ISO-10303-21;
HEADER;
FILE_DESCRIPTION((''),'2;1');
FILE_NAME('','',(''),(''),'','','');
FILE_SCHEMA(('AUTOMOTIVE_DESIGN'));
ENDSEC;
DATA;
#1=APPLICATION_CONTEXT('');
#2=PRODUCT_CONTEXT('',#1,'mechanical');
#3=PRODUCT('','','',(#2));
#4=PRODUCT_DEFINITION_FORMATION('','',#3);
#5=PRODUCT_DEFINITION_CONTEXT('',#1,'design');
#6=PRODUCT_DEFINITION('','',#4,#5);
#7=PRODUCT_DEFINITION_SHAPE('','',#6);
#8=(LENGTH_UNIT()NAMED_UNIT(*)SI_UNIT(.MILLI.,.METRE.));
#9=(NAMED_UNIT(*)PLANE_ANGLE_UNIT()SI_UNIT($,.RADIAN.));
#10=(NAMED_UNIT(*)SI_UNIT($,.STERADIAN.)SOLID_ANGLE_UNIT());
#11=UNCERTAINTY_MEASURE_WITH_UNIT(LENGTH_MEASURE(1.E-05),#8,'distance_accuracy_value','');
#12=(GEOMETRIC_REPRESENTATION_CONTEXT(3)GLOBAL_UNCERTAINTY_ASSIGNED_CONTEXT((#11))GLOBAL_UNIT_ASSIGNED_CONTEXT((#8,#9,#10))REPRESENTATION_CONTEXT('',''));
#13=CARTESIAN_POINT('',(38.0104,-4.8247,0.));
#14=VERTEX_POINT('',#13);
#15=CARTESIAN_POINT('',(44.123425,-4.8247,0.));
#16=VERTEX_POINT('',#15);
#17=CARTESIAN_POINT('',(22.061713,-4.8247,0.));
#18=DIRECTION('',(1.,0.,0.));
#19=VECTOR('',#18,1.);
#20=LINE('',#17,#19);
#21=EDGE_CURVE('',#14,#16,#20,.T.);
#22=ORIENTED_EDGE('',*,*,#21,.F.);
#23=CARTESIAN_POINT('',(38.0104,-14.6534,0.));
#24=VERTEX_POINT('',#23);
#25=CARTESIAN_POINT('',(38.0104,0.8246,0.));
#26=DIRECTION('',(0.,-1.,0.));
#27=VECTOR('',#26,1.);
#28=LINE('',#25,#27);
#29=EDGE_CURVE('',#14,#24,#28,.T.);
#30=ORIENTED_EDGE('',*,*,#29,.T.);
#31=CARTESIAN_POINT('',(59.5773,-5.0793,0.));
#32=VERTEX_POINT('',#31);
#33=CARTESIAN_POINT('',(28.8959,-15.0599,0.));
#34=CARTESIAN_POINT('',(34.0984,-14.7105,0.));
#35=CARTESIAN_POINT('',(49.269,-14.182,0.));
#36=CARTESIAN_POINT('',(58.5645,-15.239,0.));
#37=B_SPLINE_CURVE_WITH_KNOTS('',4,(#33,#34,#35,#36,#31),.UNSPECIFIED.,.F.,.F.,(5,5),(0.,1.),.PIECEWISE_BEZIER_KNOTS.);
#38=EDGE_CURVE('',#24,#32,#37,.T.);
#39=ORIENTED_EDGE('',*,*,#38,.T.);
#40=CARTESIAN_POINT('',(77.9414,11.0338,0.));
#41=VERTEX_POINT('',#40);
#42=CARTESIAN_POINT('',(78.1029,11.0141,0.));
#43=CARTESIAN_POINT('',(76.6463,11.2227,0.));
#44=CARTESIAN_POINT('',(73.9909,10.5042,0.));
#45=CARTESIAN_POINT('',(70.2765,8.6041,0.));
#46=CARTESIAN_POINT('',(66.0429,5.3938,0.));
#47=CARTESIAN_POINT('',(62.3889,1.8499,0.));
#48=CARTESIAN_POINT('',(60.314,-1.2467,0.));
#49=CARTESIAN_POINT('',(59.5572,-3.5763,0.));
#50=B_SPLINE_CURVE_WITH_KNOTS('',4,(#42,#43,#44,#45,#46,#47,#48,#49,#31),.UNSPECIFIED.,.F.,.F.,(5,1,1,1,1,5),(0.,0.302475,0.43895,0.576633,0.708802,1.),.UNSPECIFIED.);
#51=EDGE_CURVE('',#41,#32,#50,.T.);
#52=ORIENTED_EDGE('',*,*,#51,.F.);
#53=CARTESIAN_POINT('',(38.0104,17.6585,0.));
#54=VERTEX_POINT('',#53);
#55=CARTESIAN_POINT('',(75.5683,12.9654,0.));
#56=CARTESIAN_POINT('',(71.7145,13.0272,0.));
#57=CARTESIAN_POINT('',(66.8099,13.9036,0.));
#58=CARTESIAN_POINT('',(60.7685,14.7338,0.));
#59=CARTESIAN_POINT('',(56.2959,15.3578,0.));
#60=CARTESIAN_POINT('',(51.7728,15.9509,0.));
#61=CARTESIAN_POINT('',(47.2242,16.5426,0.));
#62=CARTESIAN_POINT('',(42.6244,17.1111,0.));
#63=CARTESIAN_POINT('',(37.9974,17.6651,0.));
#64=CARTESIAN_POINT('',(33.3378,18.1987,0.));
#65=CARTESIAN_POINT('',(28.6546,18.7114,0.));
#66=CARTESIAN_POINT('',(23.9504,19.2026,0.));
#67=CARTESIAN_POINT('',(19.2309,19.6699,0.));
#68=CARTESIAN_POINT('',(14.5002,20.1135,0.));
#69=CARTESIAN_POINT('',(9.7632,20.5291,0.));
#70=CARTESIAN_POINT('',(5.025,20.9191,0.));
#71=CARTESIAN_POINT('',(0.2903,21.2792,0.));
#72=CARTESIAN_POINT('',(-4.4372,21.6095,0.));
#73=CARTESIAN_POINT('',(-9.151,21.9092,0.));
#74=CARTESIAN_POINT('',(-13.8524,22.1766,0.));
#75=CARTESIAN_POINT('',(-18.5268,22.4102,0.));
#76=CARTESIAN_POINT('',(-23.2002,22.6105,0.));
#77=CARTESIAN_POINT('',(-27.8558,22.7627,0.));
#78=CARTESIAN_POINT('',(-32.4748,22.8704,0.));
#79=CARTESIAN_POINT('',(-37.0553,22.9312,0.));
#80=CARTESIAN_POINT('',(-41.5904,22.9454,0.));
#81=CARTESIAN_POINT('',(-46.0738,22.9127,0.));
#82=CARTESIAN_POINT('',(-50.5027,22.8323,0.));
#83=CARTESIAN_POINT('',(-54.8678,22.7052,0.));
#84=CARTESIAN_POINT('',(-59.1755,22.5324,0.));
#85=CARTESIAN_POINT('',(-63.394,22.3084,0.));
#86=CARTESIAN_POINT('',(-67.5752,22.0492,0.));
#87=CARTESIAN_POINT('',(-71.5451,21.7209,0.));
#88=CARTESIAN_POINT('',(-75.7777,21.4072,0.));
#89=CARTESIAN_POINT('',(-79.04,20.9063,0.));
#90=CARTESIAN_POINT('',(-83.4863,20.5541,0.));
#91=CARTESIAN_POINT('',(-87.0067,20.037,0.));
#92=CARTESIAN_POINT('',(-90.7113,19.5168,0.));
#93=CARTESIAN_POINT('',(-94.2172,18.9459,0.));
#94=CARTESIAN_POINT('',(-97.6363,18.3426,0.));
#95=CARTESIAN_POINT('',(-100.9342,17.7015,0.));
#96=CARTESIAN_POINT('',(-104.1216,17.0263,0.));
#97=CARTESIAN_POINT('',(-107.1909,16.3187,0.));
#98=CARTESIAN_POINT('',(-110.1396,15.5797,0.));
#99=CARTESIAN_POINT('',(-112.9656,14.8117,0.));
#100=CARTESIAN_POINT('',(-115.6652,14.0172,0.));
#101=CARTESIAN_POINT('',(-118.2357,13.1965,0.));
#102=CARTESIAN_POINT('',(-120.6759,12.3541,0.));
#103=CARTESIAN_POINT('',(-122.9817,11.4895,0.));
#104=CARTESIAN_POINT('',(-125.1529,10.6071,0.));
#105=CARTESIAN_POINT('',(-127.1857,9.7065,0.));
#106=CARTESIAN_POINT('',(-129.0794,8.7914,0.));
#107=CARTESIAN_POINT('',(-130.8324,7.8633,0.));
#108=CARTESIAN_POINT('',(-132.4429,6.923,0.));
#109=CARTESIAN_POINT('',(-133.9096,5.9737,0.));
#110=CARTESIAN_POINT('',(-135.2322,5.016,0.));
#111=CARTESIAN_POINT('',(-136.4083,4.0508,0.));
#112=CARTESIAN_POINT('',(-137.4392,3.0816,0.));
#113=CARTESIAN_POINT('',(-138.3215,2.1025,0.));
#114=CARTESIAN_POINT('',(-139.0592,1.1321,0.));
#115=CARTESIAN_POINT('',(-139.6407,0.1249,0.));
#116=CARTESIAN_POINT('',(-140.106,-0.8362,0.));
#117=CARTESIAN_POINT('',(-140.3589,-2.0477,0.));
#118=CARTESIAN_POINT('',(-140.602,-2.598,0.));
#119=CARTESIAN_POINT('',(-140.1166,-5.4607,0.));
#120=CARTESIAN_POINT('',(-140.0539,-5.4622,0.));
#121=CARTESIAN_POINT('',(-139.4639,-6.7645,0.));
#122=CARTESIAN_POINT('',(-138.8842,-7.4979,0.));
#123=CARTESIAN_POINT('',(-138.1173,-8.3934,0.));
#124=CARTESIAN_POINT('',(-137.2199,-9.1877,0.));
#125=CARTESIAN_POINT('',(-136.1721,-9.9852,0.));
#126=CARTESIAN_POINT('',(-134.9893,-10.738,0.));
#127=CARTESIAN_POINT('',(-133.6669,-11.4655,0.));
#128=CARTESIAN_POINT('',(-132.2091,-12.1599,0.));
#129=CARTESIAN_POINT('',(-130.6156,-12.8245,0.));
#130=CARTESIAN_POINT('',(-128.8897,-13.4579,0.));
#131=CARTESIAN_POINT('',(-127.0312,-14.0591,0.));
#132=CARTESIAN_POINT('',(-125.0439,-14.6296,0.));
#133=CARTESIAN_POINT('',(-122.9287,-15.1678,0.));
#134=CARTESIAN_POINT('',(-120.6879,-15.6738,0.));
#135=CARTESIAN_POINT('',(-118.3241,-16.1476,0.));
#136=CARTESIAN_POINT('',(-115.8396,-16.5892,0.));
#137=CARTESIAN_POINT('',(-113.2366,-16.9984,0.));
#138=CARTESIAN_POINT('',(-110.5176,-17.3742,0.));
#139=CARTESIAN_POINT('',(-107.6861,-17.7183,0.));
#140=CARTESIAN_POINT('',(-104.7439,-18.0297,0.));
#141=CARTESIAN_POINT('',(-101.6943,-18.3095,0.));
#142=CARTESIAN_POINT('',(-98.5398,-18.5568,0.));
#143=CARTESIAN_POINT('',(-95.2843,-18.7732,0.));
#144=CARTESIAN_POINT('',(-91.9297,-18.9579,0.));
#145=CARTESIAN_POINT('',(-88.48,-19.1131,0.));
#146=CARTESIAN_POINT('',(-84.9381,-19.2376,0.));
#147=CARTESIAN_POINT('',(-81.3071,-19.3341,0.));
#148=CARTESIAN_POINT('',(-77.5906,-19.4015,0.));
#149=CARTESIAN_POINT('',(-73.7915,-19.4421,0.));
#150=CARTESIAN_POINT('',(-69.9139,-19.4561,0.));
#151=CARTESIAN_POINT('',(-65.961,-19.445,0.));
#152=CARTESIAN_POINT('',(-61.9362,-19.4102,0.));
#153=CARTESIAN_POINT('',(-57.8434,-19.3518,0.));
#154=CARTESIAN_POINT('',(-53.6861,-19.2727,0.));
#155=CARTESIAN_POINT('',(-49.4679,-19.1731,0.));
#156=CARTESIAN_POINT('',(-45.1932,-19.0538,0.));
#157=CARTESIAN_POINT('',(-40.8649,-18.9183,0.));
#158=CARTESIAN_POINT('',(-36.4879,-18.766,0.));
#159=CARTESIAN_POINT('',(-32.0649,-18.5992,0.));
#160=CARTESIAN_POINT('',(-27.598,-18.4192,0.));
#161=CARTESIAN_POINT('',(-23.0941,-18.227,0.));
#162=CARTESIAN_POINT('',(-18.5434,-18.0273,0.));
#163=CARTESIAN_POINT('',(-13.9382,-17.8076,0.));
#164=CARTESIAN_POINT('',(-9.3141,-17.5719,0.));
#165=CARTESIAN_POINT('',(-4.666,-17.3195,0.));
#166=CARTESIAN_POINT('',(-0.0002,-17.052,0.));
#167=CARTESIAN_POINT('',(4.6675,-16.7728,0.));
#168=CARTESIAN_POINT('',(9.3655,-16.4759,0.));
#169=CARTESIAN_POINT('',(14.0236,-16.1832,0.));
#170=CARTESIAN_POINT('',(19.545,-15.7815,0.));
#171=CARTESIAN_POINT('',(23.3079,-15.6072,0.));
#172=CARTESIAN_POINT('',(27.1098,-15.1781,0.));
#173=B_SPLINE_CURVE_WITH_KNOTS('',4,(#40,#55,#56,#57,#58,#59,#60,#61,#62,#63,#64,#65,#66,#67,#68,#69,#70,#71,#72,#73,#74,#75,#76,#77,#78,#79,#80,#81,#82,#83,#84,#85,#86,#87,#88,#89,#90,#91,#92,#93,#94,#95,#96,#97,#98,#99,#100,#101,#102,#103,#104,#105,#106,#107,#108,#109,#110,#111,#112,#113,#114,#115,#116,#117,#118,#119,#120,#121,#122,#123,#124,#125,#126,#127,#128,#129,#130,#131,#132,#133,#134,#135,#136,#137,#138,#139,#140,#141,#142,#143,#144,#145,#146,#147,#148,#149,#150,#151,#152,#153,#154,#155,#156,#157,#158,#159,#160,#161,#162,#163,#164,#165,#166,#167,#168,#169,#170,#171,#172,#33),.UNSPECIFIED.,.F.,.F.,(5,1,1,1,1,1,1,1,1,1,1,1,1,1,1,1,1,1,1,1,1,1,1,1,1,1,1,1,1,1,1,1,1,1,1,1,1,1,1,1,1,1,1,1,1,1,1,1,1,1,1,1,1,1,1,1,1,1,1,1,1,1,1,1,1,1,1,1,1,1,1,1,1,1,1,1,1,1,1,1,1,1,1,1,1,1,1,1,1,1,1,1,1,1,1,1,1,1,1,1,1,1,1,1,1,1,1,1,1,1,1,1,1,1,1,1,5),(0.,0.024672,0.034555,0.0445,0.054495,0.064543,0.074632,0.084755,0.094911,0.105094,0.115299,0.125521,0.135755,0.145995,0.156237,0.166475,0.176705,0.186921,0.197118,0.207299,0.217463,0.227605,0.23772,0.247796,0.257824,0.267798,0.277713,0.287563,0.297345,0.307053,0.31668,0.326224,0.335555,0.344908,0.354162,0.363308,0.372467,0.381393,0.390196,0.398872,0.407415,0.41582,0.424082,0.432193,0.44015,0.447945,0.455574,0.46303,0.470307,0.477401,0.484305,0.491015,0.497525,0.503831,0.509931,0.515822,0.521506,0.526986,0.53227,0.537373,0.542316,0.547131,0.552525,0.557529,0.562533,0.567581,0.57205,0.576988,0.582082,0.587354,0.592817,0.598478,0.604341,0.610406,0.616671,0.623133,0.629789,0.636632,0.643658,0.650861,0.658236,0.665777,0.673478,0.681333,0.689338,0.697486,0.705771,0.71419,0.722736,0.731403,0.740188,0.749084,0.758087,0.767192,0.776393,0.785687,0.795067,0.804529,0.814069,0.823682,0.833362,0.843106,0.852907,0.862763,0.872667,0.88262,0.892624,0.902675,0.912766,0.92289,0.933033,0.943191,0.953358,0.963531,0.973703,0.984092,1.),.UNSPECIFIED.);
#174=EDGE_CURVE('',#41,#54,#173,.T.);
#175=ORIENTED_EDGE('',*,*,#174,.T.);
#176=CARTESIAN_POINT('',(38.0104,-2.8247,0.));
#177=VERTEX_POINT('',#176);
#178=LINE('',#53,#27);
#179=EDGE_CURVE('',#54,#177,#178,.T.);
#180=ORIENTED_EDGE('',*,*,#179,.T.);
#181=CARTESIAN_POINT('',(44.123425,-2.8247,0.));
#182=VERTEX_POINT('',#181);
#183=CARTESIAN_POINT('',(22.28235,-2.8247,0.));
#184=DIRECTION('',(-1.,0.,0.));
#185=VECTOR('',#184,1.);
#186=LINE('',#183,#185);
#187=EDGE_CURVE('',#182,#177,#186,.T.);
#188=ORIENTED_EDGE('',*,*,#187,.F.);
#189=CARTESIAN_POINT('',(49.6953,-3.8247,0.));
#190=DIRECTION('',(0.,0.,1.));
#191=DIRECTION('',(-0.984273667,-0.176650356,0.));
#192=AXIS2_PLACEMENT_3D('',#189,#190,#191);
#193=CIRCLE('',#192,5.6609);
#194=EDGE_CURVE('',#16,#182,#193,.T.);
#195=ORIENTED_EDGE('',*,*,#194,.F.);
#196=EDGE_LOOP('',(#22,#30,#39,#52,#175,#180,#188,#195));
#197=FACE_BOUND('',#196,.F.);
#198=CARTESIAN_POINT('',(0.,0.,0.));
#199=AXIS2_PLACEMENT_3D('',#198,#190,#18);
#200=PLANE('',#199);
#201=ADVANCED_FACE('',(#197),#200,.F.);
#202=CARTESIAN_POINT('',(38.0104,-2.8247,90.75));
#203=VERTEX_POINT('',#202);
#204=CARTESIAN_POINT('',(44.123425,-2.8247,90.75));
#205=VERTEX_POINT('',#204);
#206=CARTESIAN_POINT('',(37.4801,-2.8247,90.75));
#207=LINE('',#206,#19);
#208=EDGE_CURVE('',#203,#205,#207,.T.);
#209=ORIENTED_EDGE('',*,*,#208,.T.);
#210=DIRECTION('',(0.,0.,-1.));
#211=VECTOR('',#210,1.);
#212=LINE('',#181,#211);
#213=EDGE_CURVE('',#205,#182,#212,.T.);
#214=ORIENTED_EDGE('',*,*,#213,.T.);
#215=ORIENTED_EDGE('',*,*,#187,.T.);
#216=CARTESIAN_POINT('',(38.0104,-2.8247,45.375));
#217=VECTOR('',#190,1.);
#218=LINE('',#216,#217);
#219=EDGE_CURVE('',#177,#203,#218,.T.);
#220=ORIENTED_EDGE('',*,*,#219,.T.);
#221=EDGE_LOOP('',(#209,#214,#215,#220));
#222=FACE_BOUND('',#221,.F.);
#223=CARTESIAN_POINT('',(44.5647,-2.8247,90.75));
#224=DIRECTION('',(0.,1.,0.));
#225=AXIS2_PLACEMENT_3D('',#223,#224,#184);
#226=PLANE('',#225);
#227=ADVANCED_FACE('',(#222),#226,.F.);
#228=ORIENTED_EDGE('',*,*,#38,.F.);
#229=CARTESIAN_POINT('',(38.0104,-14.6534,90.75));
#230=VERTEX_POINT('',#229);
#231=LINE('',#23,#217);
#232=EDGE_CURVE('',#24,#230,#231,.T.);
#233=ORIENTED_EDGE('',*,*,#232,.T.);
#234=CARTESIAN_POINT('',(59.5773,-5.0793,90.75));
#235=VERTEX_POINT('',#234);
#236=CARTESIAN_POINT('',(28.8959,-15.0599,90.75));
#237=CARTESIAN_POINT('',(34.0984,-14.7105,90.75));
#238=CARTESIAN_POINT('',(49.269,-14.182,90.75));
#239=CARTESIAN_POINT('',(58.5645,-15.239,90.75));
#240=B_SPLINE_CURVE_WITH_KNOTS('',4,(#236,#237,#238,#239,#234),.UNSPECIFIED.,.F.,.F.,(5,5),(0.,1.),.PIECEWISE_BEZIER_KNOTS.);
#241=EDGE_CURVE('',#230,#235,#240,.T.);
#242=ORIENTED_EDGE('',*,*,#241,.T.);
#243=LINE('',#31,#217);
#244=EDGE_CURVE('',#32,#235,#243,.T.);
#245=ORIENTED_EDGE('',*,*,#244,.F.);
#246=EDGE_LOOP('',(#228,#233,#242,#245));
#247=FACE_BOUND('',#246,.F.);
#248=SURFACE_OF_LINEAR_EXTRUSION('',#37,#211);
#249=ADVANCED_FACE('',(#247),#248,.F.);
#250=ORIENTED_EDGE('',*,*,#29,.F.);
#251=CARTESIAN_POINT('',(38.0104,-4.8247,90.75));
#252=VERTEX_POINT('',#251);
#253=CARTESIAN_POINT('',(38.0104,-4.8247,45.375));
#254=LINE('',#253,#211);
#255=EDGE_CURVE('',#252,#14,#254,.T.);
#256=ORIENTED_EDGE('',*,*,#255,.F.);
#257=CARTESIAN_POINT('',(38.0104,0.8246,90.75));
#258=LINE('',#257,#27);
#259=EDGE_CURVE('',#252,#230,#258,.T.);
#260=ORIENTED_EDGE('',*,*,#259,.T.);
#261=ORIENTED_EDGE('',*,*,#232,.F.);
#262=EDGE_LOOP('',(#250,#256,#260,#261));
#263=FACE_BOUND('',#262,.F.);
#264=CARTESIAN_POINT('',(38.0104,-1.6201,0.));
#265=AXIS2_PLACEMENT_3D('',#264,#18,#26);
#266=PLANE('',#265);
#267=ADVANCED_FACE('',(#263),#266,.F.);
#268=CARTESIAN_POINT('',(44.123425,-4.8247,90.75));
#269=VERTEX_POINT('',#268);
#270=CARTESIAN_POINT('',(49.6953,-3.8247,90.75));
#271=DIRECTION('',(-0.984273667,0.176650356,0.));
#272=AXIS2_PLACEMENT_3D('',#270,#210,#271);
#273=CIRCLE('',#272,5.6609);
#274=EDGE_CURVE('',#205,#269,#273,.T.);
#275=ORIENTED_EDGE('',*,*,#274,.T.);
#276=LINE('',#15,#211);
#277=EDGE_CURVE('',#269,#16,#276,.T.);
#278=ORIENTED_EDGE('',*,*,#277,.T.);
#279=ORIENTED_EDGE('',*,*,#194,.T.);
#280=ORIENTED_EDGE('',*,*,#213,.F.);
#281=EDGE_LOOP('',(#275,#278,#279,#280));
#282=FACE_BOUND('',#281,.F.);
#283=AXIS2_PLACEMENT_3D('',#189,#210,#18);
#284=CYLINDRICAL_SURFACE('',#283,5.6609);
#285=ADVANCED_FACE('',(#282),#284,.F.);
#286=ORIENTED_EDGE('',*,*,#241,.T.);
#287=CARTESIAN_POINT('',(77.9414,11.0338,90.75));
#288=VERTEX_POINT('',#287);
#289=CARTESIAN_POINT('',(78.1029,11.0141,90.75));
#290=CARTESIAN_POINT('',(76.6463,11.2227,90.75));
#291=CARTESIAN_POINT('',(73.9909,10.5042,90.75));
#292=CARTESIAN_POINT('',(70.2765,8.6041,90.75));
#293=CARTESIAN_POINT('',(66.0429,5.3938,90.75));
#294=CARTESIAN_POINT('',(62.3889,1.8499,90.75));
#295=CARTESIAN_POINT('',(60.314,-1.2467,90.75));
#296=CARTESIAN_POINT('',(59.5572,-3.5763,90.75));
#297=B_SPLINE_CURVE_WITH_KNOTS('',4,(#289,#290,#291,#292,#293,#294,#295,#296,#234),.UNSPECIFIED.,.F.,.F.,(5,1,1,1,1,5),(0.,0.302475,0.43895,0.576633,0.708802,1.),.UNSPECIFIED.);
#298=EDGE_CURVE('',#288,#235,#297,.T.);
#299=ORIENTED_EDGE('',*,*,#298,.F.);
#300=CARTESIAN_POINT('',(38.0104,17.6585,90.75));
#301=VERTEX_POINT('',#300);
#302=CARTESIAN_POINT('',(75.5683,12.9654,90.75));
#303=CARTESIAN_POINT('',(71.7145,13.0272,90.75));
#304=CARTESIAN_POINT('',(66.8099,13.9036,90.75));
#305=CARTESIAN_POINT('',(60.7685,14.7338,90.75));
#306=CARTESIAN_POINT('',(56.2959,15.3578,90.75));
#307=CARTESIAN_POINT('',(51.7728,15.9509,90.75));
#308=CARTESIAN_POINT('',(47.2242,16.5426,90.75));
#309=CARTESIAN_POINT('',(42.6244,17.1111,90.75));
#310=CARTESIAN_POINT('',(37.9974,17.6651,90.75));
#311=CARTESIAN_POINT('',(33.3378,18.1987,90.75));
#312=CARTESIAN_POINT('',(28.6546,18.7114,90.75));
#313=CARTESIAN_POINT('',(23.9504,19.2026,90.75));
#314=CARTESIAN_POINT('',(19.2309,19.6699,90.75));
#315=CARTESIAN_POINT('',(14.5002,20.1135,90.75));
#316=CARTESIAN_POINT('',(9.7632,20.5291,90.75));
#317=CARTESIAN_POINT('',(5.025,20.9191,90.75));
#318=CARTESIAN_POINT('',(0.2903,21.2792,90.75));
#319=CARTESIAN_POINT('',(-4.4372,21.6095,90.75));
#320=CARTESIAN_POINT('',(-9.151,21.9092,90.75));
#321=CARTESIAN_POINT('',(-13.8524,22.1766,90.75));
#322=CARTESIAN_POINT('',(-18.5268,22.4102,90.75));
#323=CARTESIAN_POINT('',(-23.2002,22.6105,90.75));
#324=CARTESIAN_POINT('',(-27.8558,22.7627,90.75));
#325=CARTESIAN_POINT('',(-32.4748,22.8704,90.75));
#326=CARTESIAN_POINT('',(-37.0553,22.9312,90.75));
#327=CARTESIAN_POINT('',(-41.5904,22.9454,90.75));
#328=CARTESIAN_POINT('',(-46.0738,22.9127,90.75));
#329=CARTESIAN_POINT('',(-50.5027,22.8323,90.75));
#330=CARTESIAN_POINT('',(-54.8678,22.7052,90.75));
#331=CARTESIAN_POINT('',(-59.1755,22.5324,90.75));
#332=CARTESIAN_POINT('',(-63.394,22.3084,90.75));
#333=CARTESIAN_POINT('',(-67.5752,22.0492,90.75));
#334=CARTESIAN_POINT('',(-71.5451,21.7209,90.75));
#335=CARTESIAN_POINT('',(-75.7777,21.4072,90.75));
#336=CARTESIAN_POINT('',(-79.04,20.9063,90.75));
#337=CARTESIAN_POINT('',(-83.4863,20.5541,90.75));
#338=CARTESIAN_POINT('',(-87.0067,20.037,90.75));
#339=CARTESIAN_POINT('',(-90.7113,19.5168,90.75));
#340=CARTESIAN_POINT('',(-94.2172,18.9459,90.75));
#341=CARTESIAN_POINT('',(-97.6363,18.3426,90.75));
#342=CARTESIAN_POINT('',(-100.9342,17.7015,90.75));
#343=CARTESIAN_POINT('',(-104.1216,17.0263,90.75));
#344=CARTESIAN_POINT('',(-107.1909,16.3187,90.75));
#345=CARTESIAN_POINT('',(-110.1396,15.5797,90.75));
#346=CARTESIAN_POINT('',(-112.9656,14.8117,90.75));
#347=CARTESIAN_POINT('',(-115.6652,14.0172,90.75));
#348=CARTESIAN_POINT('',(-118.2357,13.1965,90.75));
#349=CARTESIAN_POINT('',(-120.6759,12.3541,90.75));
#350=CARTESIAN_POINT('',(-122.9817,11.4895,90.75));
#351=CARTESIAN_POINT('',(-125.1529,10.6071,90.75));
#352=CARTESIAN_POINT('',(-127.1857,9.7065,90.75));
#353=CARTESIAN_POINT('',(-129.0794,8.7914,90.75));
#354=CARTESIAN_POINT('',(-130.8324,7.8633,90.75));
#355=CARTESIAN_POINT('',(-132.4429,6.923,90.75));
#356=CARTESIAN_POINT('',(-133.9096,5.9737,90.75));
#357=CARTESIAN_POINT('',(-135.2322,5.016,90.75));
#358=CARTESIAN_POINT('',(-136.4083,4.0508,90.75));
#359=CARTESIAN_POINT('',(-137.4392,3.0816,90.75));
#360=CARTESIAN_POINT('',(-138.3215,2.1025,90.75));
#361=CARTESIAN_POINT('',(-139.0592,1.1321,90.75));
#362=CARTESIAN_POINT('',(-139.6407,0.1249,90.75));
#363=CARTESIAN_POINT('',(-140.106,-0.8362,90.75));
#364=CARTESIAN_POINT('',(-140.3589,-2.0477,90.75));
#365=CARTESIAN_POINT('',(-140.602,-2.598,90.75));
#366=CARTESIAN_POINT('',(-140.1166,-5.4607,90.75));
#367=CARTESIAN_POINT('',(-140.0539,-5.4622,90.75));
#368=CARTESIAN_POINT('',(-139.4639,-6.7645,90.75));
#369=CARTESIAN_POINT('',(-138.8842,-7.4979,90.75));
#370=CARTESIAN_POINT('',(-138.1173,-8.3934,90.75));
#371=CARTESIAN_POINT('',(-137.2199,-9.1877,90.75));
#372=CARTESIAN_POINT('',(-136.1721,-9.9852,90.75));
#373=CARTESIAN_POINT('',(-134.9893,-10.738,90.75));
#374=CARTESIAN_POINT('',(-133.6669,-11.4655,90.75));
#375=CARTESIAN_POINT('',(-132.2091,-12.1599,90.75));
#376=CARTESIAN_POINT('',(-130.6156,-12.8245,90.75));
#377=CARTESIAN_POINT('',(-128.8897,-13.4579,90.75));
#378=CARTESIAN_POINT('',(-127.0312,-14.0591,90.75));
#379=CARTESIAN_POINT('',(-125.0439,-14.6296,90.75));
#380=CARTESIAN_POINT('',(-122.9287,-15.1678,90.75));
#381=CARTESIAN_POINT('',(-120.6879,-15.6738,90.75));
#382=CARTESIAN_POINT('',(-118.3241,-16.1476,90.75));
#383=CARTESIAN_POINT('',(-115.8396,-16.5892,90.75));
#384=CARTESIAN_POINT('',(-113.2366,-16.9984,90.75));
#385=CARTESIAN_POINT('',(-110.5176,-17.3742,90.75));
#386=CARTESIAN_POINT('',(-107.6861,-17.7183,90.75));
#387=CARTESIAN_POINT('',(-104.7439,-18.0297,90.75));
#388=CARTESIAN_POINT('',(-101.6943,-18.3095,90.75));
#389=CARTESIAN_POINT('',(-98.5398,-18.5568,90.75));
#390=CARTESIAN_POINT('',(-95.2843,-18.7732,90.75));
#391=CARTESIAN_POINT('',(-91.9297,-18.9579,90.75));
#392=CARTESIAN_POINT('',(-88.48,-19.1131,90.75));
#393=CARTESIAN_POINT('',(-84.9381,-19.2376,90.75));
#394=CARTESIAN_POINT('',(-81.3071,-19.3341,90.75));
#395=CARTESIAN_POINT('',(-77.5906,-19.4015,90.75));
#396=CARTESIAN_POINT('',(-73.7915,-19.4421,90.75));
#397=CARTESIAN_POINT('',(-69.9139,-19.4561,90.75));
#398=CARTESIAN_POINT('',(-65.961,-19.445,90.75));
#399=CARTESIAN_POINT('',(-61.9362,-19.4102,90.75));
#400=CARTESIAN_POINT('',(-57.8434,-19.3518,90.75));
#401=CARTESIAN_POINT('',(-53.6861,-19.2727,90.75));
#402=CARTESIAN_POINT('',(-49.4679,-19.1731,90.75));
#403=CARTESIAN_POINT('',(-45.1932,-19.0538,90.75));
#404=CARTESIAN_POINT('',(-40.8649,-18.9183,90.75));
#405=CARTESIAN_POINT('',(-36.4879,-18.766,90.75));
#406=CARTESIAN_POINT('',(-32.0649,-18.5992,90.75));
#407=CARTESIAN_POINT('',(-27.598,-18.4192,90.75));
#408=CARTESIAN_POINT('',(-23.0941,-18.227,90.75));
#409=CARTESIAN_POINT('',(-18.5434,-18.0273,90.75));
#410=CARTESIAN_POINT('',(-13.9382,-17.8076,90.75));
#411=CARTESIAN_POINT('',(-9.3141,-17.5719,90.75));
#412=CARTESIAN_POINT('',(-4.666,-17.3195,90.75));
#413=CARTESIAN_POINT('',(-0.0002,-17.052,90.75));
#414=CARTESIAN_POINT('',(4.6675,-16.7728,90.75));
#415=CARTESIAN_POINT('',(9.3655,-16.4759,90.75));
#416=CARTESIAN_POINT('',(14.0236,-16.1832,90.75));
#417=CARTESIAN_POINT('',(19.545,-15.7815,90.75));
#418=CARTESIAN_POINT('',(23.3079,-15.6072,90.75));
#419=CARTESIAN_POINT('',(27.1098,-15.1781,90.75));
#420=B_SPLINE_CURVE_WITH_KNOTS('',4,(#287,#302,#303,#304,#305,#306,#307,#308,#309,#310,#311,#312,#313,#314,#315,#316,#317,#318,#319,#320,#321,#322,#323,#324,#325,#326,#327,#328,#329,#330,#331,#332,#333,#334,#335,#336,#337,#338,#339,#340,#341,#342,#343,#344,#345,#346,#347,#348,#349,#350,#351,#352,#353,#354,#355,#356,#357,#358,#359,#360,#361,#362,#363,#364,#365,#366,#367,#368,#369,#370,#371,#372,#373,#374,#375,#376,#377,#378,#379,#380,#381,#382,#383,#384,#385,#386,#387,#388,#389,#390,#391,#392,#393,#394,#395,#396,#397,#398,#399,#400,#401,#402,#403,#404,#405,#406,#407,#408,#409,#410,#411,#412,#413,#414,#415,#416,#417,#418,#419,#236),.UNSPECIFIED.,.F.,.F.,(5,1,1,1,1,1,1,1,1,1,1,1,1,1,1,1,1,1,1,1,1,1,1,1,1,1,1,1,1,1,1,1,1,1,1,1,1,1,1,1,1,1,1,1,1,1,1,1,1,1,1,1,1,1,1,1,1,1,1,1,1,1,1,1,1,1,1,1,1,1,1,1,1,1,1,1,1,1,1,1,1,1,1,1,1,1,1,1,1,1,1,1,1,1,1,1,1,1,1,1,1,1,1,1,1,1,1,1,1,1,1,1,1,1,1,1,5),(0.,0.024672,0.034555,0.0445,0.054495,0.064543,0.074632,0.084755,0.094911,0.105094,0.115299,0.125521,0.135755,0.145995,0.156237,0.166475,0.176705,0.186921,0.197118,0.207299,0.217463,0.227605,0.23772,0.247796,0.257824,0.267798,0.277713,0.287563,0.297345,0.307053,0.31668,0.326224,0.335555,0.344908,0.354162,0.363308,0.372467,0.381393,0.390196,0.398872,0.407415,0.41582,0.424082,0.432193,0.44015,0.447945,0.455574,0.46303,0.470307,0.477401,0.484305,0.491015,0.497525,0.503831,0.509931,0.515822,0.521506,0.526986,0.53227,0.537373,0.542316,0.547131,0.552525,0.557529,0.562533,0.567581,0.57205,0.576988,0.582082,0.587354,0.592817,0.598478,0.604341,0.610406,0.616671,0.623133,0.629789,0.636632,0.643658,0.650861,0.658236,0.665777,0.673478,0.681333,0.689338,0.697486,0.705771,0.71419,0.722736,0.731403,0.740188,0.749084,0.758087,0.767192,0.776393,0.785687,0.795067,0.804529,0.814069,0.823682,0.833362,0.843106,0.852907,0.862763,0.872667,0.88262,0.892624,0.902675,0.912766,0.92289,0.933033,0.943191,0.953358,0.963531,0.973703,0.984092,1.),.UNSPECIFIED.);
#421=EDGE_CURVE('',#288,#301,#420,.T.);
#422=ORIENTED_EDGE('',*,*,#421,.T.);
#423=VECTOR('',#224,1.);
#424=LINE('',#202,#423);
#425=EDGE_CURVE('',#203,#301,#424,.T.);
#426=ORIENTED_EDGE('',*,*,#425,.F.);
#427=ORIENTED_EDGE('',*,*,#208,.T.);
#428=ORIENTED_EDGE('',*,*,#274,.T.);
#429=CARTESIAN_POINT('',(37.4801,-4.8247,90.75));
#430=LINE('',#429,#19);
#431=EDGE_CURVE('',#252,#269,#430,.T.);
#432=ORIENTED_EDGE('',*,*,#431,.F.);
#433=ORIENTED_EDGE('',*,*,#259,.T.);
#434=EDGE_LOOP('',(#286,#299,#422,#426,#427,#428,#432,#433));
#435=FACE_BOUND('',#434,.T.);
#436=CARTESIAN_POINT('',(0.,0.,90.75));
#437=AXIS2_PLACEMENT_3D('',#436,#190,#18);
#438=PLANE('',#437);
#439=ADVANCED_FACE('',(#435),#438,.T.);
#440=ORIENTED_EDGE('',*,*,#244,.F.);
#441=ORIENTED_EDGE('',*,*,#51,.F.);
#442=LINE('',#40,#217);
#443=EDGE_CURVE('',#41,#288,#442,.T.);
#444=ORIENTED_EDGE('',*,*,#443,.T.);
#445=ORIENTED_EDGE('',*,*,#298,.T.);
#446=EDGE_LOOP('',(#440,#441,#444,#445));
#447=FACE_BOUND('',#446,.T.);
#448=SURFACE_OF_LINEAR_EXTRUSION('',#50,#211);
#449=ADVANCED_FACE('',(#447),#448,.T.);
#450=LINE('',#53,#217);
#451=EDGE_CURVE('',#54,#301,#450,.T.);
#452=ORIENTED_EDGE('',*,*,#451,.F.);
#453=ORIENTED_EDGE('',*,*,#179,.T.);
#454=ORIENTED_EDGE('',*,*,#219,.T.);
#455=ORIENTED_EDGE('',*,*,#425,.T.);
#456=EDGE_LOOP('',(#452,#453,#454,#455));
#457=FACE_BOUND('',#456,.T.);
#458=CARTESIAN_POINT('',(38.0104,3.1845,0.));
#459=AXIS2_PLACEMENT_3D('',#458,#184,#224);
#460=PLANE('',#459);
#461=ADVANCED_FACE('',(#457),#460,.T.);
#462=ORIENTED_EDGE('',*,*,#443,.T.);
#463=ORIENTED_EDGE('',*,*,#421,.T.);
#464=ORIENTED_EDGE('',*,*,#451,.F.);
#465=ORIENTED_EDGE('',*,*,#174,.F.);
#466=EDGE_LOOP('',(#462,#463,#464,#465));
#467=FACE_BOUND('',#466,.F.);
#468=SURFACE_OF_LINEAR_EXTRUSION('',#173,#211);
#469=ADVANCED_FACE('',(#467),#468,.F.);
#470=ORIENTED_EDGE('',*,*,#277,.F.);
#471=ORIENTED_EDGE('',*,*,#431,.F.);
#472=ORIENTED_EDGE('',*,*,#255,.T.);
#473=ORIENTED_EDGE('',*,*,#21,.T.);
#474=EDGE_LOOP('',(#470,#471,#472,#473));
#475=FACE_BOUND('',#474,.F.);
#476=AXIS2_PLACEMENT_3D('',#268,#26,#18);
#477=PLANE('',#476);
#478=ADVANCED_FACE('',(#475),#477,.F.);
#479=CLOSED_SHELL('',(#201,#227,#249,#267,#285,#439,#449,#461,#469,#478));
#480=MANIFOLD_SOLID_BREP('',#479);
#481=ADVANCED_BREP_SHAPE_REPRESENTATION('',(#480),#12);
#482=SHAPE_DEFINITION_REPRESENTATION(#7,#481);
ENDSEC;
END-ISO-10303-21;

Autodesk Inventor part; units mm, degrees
ref_plane "YZ Plane" through (0, 0, 0) normal (1, 0, 0) x (0, 1, 0)
ref_plane "XZ Plane" through (0, 0, 0) normal (0, 1, 0) x (-1, 0, 0)
ref_plane "XY Plane" through (0, 0, 0) normal (0, 0, 1) x (1, 0, 0)
sketch "Sketch3" plane through (0, 0, 0) normal (0, 0, 1) x (1, 0, 0)
  line L0 (-80.5781, 0.8246) -> (-80.5781, 20.7988) construction
  circle A0 centre (-80.5781, 0.8246) radius 13.481
  line L1 (-53.7179, 12.5571) -> (-53.7179, -10.9927)
  arc A1 (-53.7179, -10.9927) -> (-51.5054, -12.9814) centre (-51.7179, -10.9927) ccw
  arc A2 (-51.5054, 14.5458) -> (-53.7179, 12.5571) centre (-51.7179, 12.5571) ccw
  line L2 (36.2229, -3.6088) -> (-51.5054, -12.9814)
  line L3 (38.0104, 3.1845) -> (38.0104, -1.6201)
  line L4 (-80.5781, 0.8246) -> (49.5525, 0.8246) construction
  circle A3 centre (49.6953, -3.8247) radius 5.6609
  line L5 (59.6953, 14.884) -> (59.6953, -12.7998) construction
  spline S0 degree 4 poles (77.9414, 11.0338) (75.5683, 12.9654) (71.7145, 13.0272) (66.8099, 13.9036) (60.7685, 14.7338) (56.2959, 15.3578) (51.7728, 15.9509) (47.2242, 16.5426) (42.6244, 17.1111) (37.9974, 17.6651) (33.3378, 18.1987) (28.6546, 18.7114) (23.9504, 19.2026) (19.2309, 19.6699) (14.5002, 20.1135) (9.7632, 20.5291) (5.025, 20.9191) (0.2903, 21.2792) (-4.4372, 21.6095) (-9.151, 21.9092) (-13.8524, 22.1766) (-18.5268, 22.4102) (-23.2002, 22.6105) (-27.8558, 22.7627) (-32.4748, 22.8704) (-37.0553, 22.9312) (-41.5904, 22.9454) (-46.0738, 22.9127) (-50.5027, 22.8323) (-54.8678, 22.7052) (-59.1755, 22.5324) (-63.394, 22.3084) (-67.5752, 22.0492) (-71.5451, 21.7209) (-75.7777, 21.4072) (-79.04, 20.9063) (-83.4863, 20.5541) (-87.0067, 20.037) (-90.7113, 19.5168) (-94.2172, 18.9459) (-97.6363, 18.3426) (-100.9342, 17.7015) (-104.1216, 17.0263) (-107.1909, 16.3187) (-110.1396, 15.5797) (-112.9656, 14.8117) (-115.6652, 14.0172) (-118.2357, 13.1965) (-120.6759, 12.3541) (-122.9817, 11.4895) (-125.1529, 10.6071) (-127.1857, 9.7065) (-129.0794, 8.7914) (-130.8324, 7.8633) (-132.4429, 6.923) (-133.9096, 5.9737) (-135.2322, 5.016) (-136.4083, 4.0508) (-137.4392, 3.0816) (-138.3215, 2.1025) (-139.0592, 1.1321) (-139.6407, 0.1249) (-140.106, -0.8362) (-140.3589, -2.0477) (-140.602, -2.598) (-140.1166, -5.4607) (-140.0539, -5.4622) (-139.4639, -6.7645) (-138.8842, -7.4979) (-138.1173, -8.3934) (-137.2199, -9.1877) (-136.1721, -9.9852) (-134.9893, -10.738) (-133.6669, -11.4655) (-132.2091, -12.1599) (-130.6156, -12.8245) (-128.8897, -13.4579) (-127.0312, -14.0591) (-125.0439, -14.6296) (-122.9287, -15.1678) (-120.6879, -15.6738) (-118.3241, -16.1476) (-115.8396, -16.5892) (-113.2366, -16.9984) (-110.5176, -17.3742) (-107.6861, -17.7183) (-104.7439, -18.0297) (-101.6943, -18.3095) (-98.5398, -18.5568) (-95.2843, -18.7732) (-91.9297, -18.9579) (-88.48, -19.1131) (-84.9381, -19.2376) (-81.3071, -19.3341) (-77.5906, -19.4015) (-73.7915, -19.4421) (-69.9139, -19.4561) (-65.961, -19.445) (-61.9362, -19.4102) (-57.8434, -19.3518) (-53.6861, -19.2727) (-49.4679, -19.1731) (-45.1932, -19.0538) (-40.8649, -18.9183) (-36.4879, -18.766) (-32.0649, -18.5992) (-27.598, -18.4192) (-23.0941, -18.227) (-18.5434, -18.0273) (-13.9382, -17.8076) (-9.3141, -17.5719) (-4.666, -17.3195) (-0.0002, -17.052) (4.6675, -16.7728) (9.3655, -16.4759) (14.0236, -16.1832) (19.545, -15.7815) (23.3079, -15.6072) (27.1098, -15.1781) (28.8959, -15.0599) knots 0 0 0 0 0 0.024672 0.034555 0.0445 0.054495 0.064543 0.074632 0.084755 0.094911 0.105094 0.115299 0.125521 0.135755 0.145995 0.156237 0.166475 0.176705 0.186921 0.197118 0.207299 0.217463 0.227605 0.23772 0.247796 0.257824 0.267798 0.277713 0.287563 0.297345 0.307053 0.31668 0.326224 0.335555 0.344908 0.354162 0.363308 0.372467 0.381393 0.390196 0.398872 0.407415 0.41582 0.424082 0.432193 0.44015 0.447945 0.455574 0.46303 0.470307 0.477401 0.484305 0.491015 0.497525 0.503831 0.509931 0.515822 0.521506 0.526986 0.53227 0.537373 0.542316 0.547131 0.552525 0.557529 0.562533 0.567581 0.57205 0.576988 0.582082 0.587354 0.592817 0.598478 0.604341 0.610406 0.616671 0.623133 0.629789 0.636632 0.643658 0.650861 0.658236 0.665777 0.673478 0.681333 0.689338 0.697486 0.705771 0.71419 0.722736 0.731403 0.740188 0.749084 0.758087 0.767192 0.776393 0.785687 0.795067 0.804529 0.814069 0.823682 0.833362 0.843106 0.852907 0.862763 0.872667 0.88262 0.892624 0.902675 0.912766 0.92289 0.933033 0.943191 0.953358 0.963531 0.973703 0.984092 1 1 1 1 1
  line L6 (7.5013, -16.4763) -> (50.2906, -13.6435) construction
  arc A4 (44.8353, -17.2546) -> (13.385, -19.3367) centre (31.5327, -54.8885) ccw construction
  line L7 (159.6953, -3.8066) -> (59.6953, -3.8066) construction
  line L8 (-51.5054, 14.5458) -> (36.2229, 5.1732)
  arc A5 (36.2229, -3.6088) -> (38.0104, -1.6201) centre (36.0104, -1.6201) ccw
  arc A6 (38.0104, 3.1845) -> (36.2229, 5.1732) centre (36.0104, 3.1845) ccw
  spline S1 degree 4 poles (78.1029, 11.0141) (76.6463, 11.2227) (73.9909, 10.5042) (70.2765, 8.6041) (66.0429, 5.3938) (62.3889, 1.8499) (60.314, -1.2467) (59.5572, -3.5763) (59.5773, -5.0793) knots 0 0 0 0 0 0.302475 0.43895 0.576633 0.708802 1 1 1 1 1
  spline S2 degree 4 poles (28.8959, -15.0599) (34.0984, -14.7105) (49.269, -14.182) (58.5645, -15.239) (59.5773, -5.0793) knots 0 0 0 0 0 1 1 1 1 1
  line L9 (28.8959, -15.0599) -> (34.0984, -14.7105) construction
  line L10 (34.0984, -14.7105) -> (49.269, -14.182) construction
  line L11 (49.269, -14.182) -> (58.5645, -15.239) construction
  line L12 (58.5645, -15.239) -> (59.5773, -5.0793) construction
  line L13 (-140.4646, -2.8394) -> (159.4818, -3.8173) construction
  line L14 (-132.0856, 0.6333) -> (-132.0856, -6.3667)
  line L15 (-132.0856, -6.3667) -> (-110.3816, -12.3574)
  line L16 (-110.3816, -12.3574) -> (-104.797, -12.3574)
  line L17 (-104.797, -12.3574) -> (-104.797, -18.0156)
  line L18 (-132.0856, 0.6333) -> (-110.3816, 10.553)
  line L19 (-110.3816, 10.553) -> (-104.1736, 10.553)
  line L20 (-104.1736, 10.553) -> (-104.1736, 17.0026)
  line L21 (38.0104, 0.8246) -> (38.0104, -14.6534)
  line L22 (38.0104, 0.8246) -> (38.0104, 17.6585)
  point P0 (0, 0)
  point P1 (17.6589, 23.5628)
  point P2 (75.883, 10.8572)
  point P3 (72.8647, 9.7686)
  point P4 (69.4179, 7.8149)
  point P5 (66.0452, 5.2617)
  point P6 (63.1887, 2.4463)
  point P7 (61.1228, -0.3317)
  point P8 (59.9357, -2.8689)
  point P9 (-160.0931, -3.8671)
  point P10 (28.8959, -15.0599)
  point P11 (69.5533, 13.4647)
  point P12 (65.1899, 14.1023)
  point P13 (60.7936, 14.7318)
  point P14 (56.3207, 15.3468)
  point P15 (51.7945, 15.947)
  point P16 (47.2398, 16.5346)
  point P17 (42.6414, 17.1053)
  point P18 (33.3491, 18.1925)
  point P19 (28.6632, 18.7055)
  point P20 (23.9568, 19.1966)
  point P21 (19.2348, 19.6643)
  point P22 (14.5017, 20.1074)
  point P23 (9.7623, 20.5238)
  point P24 (5.0217, 20.9132)
  point P25 (0.2844, 21.2735)
  point P26 (-4.4451, 21.6038)
  point P27 (-9.1614, 21.9032)
  point P28 (-13.86, 22.1702)
  point P29 (-18.5361, 22.4036)
  point P30 (-23.211, 22.601)
  point P31 (-27.8721, 22.754)
  point P32 (-32.4966, 22.8611)
  point P33 (-37.0797, 22.9217)
  point P34 (-41.6169, 22.9356)
  point P35 (-46.1028, 22.9023)
  point P36 (-50.5329, 22.8216)
  point P37 (-54.9021, 22.6941)
  point P38 (-59.2065, 22.5195)
  point P39 (-63.4406, 22.2977)
  point P40 (-67.6008, 22.0302)
  point P41 (-71.6806, 21.7165)
  point P42 (-75.6814, 21.3591)
  point P43 (-79.1834, 20.9458)
  point P44 (-83.4048, 20.5095)
  point P45 (-87.1309, 20.023)
  point P46 (-90.7527, 19.494)
  point P47 (-94.2725, 18.9266)
  point P48 (-97.6845, 18.3211)
  point P49 (-100.9861, 17.6791)
  point P50 (-107.2438, 16.2934)
  point P51 (-110.1931, 15.553)
  point P52 (-113.0194, 14.7835)
  point P53 (-115.7191, 13.987)
  point P54 (-118.2898, 13.165)
  point P55 (-120.7294, 12.3201)
  point P56 (-123.0349, 11.454)
  point P57 (-125.2048, 10.569)
  point P58 (-127.2364, 9.6666)
  point P59 (-129.1282, 8.7491)
  point P60 (-130.8786, 7.8185)
  point P61 (-132.486, 6.8762)
  point P62 (-133.9488, 5.9245)
  point P63 (-135.2661, 4.9648)
  point P64 (-136.4363, 3.9987)
  point P65 (-137.4592, 3.0275)
  point P66 (-138.3336, 2.0531)
  point P67 (-139.0591, 1.0763)
  point P68 (-139.6352, 0.0983)
  point P69 (-140.0613, -0.8802)
  point P70 (-140.338, -1.8576)
  point P71 (-140.1239, -5.2398)
  point P72 (-139.9547, -5.7022)
  point P73 (-139.492, -6.6066)
  point P74 (-138.8844, -7.4823)
  point P75 (-138.1328, -8.3292)
  point P76 (-137.2384, -9.147)
  point P77 (-136.202, -9.9355)
  point P78 (-135.0249, -10.6943)
  point P79 (-133.7085, -11.4228)
  point P80 (-132.2548, -12.1206)
  point P81 (-130.6648, -12.7879)
  point P82 (-128.941, -13.4239)
  point P83 (-127.0846, -14.0282)
  point P84 (-125.0983, -14.6009)
  point P85 (-122.9839, -15.1415)
  point P86 (-120.7435, -15.6497)
  point P87 (-118.3798, -16.1256)
  point P88 (-115.8952, -16.569)
  point P89 (-113.2918, -16.9797)
  point P90 (-110.5723, -17.3574)
  point P91 (-107.74, -17.7027)
  point P92 (-101.7463, -18.2964)
  point P93 (-98.5909, -18.5451)
  point P94 (-95.3341, -18.7623)
  point P95 (-91.9783, -18.9484)
  point P96 (-88.5271, -19.1041)
  point P97 (-84.9838, -19.2298)
  point P98 (-81.3514, -19.3267)
  point P99 (-77.6332, -19.3951)
  point P100 (-73.8324, -19.4362)
  point P101 (-69.9531, -19.4509)
  point P102 (-65.9985, -19.4404)
  point P103 (-61.9719, -19.4059)
  point P104 (-57.8772, -19.3483)
  point P105 (-53.718, -19.2694)
  point P106 (-49.4979, -19.1701)
  point P107 (-45.2211, -19.0516)
  point P108 (-40.8909, -18.916)
  point P109 (-36.5118, -18.7642)
  point P110 (-32.0871, -18.5977)
  point P111 (-27.6213, -18.418)
  point P112 (-23.1183, -18.2269)
  point P113 (-18.5646, -18.0247)
  point P114 (-13.9566, -17.8054)
  point P115 (-9.3252, -17.5693)
  point P116 (-4.674, -17.317)
  point P117 (-0.0078, -17.05)
  point P118 (4.6686, -16.7695)
  point P119 (9.3513, -16.477)
  point P120 (14.0352, -16.1731)
  point P121 (18.7161, -15.8596)
  point P122 (23.3889, -15.5371)
  point P123 (78.0825, 12.164)
  point P124 (159.2574, -3.8401)
  point P125 (158.8836, -3.8779)
  point P126 (158.3607, -3.9307)
  point P127 (157.6896, -3.9985)
  point P128 (156.8706, -4.081)
  point P129 (155.9046, -4.1779)
  point P130 (154.7931, -4.2892)
  point P131 (153.5367, -4.4143)
  point P132 (152.1372, -4.5532)
  point P133 (150.5955, -4.7056)
  point P134 (148.914, -4.8712)
  point P135 (147.0936, -5.0494)
  point P136 (145.137, -5.2399)
  point P137 (143.0457, -5.4421)
  point P138 (140.8221, -5.6563)
  point P139 (138.4686, -5.8813)
  point P140 (135.9876, -6.1174)
  point P141 (133.3815, -6.3634)
  point P142 (130.6533, -6.6196)
  point P143 (127.8054, -6.8851)
  point P144 (124.8414, -7.1596)
  point P145 (121.7634, -7.4428)
  point P146 (118.5756, -7.7341)
  point P147 (115.2804, -8.0332)
  point P148 (111.8817, -8.3395)
  point P149 (108.3828, -8.6527)
  point P150 (104.787, -8.9722)
  point P151 (101.0985, -9.2974)
  point P152 (97.3206, -9.6283)
  point P153 (93.4572, -9.9643)
  point P154 (89.5122, -10.3048)
  point P155 (85.4898, -10.6492)
  point P156 (81.3936, -10.9969)
  point P157 (77.2284, -11.3479)
  point P158 (72.9975, -11.701)
  point P159 (68.7057, -12.0556)
  point P160 (64.3572, -12.4117)
  point P161 (59.9559, -12.7678)
  point P162 (55.5069, -13.1239)
  point P163 (51.0138, -13.4788)
  point P164 (46.4817, -13.8316)
  point P165 (41.9148, -14.182)
  point P166 (35.7035, -14.3277)
  point P167 (32.6946, -14.8708)
  point P168 (82.2459, 11.5043)
  point P169 (86.3364, 10.8401)
  point P170 (90.3495, 10.1732)
  point P171 (94.2816, 9.5051)
  point P172 (98.1288, 8.837)
  point P173 (101.8872, 8.171)
  point P174 (105.5538, 7.5086)
  point P175 (109.1244, 6.8507)
  point P176 (112.596, 6.1997)
  point P177 (115.9653, 5.5565)
  point P178 (119.2287, 4.9229)
  point P179 (122.3835, 4.3007)
  point P180 (125.4264, 3.6911)
  point P181 (128.3547, 3.0956)
  point P182 (131.1654, 2.5157)
  point P183 (133.8561, 1.9532)
  point P184 (136.4244, 1.4093)
  point P185 (138.8676, 0.8855)
  point P186 (141.1833, 0.383)
  point P187 (143.3697, -0.0964)
  point P188 (145.4247, -0.5518)
  point P189 (147.3462, -0.9817)
  point P190 (149.1327, -1.3852)
  point P191 (150.7821, -1.7608)
  point P192 (152.2935, -2.1073)
  point P193 (153.6651, -2.4241)
  point P194 (154.8954, -2.7103)
  point P195 (155.9838, -2.9647)
  point P196 (156.9291, -3.187)
  point P197 (157.7307, -3.376)
  point P198 (158.3871, -3.5317)
  point P199 (158.8986, -3.6529)
  dimension "d3" = 26.962
  dimension "d6" = 11.3219
  dimension "d7" = 110
  dimension "d8" = 100
  dimension "d9" = 2
  dimension "d11" = 4.6493
  dimension "d25" = 7
  dimension "d26" = 3.5
  dimension "d27" = 8.379
  dimension "d28" = 30.083
  dimension "d29" = 5
  dimension "d30" = 5
  dimension "d31" = 59.8865
extrude "Extrusion3" add sketch "Sketch3" along normal blind 90.75 contours L22 S0 S1 S2 L21 L3
sketch "Sketch4" plane through (0, 0, 90.75) normal (0, 0, 1) x (1, 0, 0)
  circle A0 centre (49.6953, -3.8247) radius 5.6609 projected
  line L0 (44.0343, -3.8247) -> (38.0104, -3.8247) construction
  line L1 (38.0104, 17.6585) -> (38.0104, -14.6534) projected
  line L2 (44.5647, -2.8247) -> (37.4801, -2.8247)
  line L3 (37.4801, -2.8247) -> (37.4801, -4.8247)
  line L4 (37.4801, -4.8247) -> (44.5647, -4.8247)
  line L5 (44.5647, -4.8247) -> (44.5647, -2.8247)
  line L6 (44.5647, -2.8247) -> (37.4801, -4.8247) construction
  line L7 (37.4801, -2.8247) -> (44.5647, -4.8247) construction
  point P0 (0, 0)
  point P1 (41.0224, -3.8247)
  dimension "d34" = 2
extrude "Extrusion4" cut sketch "Sketch4" against normal blind 154.75 contours L2 L5 L4 A0 | A0 L4 L1 L2 | L1 L4 L3 L2 picked at (44.3912, -3.9363)
properties part number "4P.01.01.11-TW-v1-WingRibWFlapSingle" material "Polyurethane Foam"
